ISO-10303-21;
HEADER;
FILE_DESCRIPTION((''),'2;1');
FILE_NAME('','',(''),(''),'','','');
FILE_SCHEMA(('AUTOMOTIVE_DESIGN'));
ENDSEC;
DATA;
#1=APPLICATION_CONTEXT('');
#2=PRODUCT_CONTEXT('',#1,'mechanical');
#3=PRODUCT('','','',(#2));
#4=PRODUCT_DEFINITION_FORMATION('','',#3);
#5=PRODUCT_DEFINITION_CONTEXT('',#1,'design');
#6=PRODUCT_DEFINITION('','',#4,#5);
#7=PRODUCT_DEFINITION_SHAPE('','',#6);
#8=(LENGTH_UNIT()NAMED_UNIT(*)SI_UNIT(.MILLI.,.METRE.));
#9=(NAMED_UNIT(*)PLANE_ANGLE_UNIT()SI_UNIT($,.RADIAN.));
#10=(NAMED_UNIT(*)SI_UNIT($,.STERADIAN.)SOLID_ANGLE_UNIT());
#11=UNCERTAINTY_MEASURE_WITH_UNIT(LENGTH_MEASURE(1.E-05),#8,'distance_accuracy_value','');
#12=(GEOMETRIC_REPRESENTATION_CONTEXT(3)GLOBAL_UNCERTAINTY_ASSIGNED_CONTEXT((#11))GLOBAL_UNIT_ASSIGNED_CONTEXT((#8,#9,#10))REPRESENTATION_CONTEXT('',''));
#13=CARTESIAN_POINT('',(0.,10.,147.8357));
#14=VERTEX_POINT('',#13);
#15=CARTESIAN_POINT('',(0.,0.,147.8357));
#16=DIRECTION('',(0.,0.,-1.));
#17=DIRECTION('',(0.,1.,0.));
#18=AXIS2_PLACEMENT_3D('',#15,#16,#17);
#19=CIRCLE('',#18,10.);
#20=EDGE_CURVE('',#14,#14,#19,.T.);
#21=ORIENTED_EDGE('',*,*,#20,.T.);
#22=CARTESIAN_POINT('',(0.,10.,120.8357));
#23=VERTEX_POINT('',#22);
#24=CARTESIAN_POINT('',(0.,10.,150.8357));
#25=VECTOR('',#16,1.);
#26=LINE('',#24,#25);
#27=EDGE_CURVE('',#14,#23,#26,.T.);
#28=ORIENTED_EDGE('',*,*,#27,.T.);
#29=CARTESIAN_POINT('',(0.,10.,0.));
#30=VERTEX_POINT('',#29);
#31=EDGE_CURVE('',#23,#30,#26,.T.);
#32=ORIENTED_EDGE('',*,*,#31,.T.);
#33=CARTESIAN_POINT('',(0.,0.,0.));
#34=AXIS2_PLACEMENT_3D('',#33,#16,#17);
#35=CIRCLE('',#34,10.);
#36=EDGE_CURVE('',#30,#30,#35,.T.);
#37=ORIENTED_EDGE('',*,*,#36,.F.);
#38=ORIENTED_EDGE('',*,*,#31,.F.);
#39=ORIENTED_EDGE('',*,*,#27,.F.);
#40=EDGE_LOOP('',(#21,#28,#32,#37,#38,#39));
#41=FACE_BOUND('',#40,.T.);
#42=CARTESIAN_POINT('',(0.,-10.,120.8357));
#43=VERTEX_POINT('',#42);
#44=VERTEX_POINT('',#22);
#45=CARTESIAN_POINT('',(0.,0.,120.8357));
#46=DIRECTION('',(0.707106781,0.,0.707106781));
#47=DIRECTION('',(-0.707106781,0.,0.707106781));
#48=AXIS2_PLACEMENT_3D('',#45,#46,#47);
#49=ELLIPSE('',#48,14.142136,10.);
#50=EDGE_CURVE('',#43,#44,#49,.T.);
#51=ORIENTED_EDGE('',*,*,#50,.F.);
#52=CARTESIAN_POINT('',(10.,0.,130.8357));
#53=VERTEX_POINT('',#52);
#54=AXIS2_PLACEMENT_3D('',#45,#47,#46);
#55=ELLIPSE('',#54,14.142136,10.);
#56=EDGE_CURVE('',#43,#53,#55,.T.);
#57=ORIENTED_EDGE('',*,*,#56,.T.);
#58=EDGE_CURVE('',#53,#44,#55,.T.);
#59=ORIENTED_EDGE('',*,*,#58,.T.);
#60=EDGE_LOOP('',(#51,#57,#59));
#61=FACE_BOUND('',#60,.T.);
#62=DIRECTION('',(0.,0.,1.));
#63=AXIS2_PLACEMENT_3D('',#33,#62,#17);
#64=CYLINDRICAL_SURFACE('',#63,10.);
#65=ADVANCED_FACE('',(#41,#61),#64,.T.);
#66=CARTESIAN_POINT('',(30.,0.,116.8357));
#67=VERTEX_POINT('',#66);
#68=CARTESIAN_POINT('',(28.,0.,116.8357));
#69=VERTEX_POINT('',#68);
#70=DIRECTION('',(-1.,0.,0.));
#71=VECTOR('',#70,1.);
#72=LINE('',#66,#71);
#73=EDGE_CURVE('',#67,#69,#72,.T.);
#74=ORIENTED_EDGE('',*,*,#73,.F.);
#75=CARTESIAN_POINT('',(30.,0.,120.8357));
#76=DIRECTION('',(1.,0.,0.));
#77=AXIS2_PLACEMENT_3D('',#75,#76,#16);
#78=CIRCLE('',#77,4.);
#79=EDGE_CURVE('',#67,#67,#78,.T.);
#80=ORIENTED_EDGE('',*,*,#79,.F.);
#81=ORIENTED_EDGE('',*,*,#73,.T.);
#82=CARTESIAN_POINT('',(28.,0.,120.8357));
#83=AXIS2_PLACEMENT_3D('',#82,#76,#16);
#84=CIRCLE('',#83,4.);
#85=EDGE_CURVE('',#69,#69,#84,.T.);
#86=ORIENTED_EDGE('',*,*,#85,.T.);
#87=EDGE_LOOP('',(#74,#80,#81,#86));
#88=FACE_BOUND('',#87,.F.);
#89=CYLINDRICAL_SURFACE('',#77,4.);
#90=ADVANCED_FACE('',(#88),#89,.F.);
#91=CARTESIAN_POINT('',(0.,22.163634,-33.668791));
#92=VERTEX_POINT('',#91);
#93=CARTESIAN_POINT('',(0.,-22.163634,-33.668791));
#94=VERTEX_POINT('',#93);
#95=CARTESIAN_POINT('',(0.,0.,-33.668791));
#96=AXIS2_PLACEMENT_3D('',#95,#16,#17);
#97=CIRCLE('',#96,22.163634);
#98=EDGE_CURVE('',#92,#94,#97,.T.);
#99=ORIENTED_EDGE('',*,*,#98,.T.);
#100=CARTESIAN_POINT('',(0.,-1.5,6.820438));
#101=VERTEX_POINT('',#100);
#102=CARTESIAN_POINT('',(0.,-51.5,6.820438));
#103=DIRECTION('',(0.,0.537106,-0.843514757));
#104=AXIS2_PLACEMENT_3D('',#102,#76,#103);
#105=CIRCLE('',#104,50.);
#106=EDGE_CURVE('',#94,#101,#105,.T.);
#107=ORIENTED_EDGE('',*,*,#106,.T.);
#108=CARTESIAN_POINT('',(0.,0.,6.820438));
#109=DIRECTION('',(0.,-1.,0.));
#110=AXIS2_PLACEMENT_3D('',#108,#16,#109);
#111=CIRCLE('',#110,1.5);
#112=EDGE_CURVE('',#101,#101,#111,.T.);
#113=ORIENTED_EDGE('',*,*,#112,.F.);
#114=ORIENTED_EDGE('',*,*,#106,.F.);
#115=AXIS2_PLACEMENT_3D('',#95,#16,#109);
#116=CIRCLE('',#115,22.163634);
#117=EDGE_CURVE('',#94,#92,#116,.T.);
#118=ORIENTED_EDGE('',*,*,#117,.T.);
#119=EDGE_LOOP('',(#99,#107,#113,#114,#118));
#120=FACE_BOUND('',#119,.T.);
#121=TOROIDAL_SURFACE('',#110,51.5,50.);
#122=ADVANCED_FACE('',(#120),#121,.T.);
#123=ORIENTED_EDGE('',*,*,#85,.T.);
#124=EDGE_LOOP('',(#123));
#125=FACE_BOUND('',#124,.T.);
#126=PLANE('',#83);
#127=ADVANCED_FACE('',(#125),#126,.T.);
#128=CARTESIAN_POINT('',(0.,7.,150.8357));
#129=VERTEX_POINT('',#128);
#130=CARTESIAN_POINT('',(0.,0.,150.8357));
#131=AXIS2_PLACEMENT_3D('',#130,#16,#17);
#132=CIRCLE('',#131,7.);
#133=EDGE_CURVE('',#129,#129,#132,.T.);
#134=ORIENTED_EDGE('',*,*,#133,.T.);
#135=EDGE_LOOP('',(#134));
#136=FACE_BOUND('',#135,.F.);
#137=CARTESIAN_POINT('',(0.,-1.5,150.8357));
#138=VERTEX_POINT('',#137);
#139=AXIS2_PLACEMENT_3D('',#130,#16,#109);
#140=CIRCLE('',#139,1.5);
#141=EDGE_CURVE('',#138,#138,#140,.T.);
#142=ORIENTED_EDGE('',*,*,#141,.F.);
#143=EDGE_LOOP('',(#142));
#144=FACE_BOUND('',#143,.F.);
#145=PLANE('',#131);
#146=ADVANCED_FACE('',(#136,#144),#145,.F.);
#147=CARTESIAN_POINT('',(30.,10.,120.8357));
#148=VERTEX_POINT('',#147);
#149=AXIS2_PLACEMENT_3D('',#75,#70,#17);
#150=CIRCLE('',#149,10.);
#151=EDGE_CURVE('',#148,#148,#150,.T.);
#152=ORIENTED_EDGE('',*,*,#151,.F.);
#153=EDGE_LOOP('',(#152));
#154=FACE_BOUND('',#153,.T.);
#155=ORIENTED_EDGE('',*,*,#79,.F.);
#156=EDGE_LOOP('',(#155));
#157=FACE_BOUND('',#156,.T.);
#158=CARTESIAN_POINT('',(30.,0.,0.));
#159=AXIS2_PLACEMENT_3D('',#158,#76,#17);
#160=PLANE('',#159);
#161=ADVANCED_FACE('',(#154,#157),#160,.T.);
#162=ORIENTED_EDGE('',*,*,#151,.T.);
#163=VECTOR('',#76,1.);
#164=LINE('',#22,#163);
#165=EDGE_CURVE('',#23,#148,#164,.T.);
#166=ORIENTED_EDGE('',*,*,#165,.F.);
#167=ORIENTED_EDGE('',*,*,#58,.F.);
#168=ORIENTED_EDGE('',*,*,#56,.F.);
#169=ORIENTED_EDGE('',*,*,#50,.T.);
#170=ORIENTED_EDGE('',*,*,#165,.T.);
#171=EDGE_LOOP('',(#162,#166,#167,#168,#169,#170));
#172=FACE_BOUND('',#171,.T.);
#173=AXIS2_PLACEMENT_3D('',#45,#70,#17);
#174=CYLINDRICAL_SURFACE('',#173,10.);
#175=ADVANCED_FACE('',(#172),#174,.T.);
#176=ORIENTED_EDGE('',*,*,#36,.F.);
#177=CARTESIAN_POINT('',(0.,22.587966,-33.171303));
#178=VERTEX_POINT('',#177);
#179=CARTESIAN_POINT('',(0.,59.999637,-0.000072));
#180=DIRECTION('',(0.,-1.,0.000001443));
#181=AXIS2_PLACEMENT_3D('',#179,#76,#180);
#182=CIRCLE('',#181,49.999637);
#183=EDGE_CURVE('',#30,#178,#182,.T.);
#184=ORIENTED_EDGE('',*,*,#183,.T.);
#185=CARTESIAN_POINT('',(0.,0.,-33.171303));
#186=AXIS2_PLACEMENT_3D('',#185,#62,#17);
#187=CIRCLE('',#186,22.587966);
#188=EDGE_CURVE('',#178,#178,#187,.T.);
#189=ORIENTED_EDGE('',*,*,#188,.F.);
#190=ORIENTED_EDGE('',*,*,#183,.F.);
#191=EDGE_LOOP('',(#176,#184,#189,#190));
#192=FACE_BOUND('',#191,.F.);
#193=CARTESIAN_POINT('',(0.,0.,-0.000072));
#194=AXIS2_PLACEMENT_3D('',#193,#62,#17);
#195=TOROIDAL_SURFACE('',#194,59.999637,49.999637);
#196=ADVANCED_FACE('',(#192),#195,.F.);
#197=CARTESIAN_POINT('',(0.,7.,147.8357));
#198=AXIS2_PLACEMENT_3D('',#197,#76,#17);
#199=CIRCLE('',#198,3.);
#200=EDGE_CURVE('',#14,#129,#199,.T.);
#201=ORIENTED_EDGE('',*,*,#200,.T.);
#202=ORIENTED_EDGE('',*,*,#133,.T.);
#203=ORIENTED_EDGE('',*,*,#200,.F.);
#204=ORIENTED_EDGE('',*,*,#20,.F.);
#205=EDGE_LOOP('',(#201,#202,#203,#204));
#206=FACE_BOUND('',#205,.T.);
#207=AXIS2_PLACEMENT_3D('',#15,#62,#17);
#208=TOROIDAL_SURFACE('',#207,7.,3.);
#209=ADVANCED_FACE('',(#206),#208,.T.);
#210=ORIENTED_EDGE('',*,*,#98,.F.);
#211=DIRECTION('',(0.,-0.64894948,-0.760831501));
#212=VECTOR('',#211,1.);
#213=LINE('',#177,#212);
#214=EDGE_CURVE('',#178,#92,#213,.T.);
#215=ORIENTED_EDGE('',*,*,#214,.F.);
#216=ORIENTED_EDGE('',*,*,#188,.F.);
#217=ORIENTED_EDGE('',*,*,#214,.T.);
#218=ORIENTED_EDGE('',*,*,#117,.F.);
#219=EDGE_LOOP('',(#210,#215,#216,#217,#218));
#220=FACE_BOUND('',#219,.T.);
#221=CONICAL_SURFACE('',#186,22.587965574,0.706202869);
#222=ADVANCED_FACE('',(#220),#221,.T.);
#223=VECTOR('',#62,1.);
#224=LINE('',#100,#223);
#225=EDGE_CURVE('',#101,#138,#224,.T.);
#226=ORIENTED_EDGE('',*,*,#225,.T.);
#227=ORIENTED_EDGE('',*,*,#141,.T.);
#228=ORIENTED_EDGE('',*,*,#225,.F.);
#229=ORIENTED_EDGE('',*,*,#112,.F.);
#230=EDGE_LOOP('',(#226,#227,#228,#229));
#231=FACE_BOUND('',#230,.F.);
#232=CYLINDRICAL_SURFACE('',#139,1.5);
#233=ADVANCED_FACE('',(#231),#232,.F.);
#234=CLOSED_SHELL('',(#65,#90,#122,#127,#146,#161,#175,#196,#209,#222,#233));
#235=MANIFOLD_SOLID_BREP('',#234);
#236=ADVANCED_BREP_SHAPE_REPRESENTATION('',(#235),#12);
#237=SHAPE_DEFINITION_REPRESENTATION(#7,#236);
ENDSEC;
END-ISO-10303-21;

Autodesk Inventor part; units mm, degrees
ref_plane "YZ Plane" through (0, 0, 0) normal (1, 0, 0) x (0, 1, 0)
ref_plane "XZ Plane" through (0, 0, 0) normal (0, 1, 0) x (-1, 0, 0)
ref_plane "XY Plane" through (0, 0, 0) normal (0, 0, 1) x (1, 0, 0)
sketch "Sketch1" plane through (0, 0, 0) normal (1, 0, 0) x (0, 1, 0)
  line L0 (10, 0) -> (10, 150.8357)
  arc A0 (10, 0) -> (24.6447, -35.3553) centre (60, 0) ccw
  line L1 (10, 0) -> (60, 0) construction
  line L2 (24.6447, -35.3553) -> (60, 0) construction
  line L3 (24.6447, -35.3553) -> (0, -35.3553)
  line L4 (10, 150.8357) -> (0, 150.8357)
  line L5 (0, 150.8357) -> (0, -35.3553)
  circle A1 centre (0, 120.8357) radius 10
  point P0 (0, 0)
  dimension "d5" = 50
  dimension "d6" = 45
  dimension "d21" = 20
  dimension "d22" = 30
revolve "Revolution1" add sketch "Sketch1" angle 360 about axis through (0, 0, 150.8357) along (0, 0, -1) picked at (3.0032, 122.282) contours A0 L3 L5 A1 L0 | A1 L5 L4 L0 | A1 L5
fillet "Fillet1" radius 3 1 edges at (0, -10, 150.8357)
sketch "Sketch2" plane through (0, 0, 150.8357) normal (0, 0, 1) x (1, 0, 0)
  point P0 (0, 0)
  point P1 (0, 0)
hole "Hole1" at (0, 0, 150.8357) direction (0, 0, -1) diameter 3 end through all
fillet "Fillet2" radius 50 1 edges at (0, 1.5, -35.3553)
chamfer "Chamfer1" distance 3 angle 45 2 edges at (-24.6447, 0, -35.3553) (24.6447, 0, -35.3553)
ref_plane "Work Plane2" through (0, 10, 0) normal (-1, 0, 0) x (0, 0, 1)
ref_plane "Work Plane1" through (0, 10, 150.8357) normal (0, 1, 0) x (-1, 0, 0)
extrude "Extrusion1" add sketch "Sketch1" along normal blind 30 contours A1 L5 | L5 A1
sketch "Sketch3" plane through (0, 0, 150.8357) normal (0, 0, 1) x (1, 0, 0)
  point P0 (0, 0)
  point P1 (0, 0)
hole "Hole2" at (0, 0, 150.8357) direction (0, 0, -1) diameter 3 end through all
sketch "Sketch5" plane through (30, 0, 120.8357) normal (1, 0, 0) x (0, 0, -1)
  point P0 (120.8357, 0)
  point P1 (0.0315, -0.0065)
sketch "Sketch6" plane through (30, 0, 120.8357) normal (1, 0, 0) x (0, 0, -1)
  point P0 (120.8357, 0)
ref_plane "Work Plane3" through (30, 0, 120.8357) normal (1, 0, 0) x (0, 0, -1)
sketch "Sketch9" plane through (30, 0, 120.8357) normal (1, 0, 0) x (0, 0, -1)
  circle A0 centre (0, 0) radius 4
  point P0 (120.8357, 0)
  dimension "d40" = 8
extrude "Extrusion2" cut sketch "Sketch9" against normal blind 2
equation "\"d5\" = Rbend"
equation "\"d21\" = mainDiameter"
equation "\"d22\" = magnetPosition"
equation "\"d23\" = magnetPosition"
equation "\"d30\" = Thickness"
equation "\"d40\" = magnetDiamter"
equation "\"d41\" = magnetHeight"
equation "\"mainDiameter\" = 20"
equation "\"channelDiameter\" = 1"
equation "\"Rbend\" = 50"
equation "\"BendRadius\" = Thickness"
equation "\"BendReliefWidth\" = Thickness"
equation "\"BendReliefDepth\" = 0.5 * Thickness"
equation "\"CornerReliefSize\" = 4 * Thickness"
equation "\"MinimumRemnant\" = 2 * Thickness"
equation "\"TransitionRadius\" = BendRadius"
equation "\"JacobiRadiusSize\" = BendRadius"
equation "\"GapSize\" = Thickness"
equation "\"magnetPosition\" = 30"
equation "\"magnetDiamter\" = 8"
equation "\"magnetHeight\" = 2"
equation "\"Thickness\" = 3.048"
properties part number "fiberHolder2"
